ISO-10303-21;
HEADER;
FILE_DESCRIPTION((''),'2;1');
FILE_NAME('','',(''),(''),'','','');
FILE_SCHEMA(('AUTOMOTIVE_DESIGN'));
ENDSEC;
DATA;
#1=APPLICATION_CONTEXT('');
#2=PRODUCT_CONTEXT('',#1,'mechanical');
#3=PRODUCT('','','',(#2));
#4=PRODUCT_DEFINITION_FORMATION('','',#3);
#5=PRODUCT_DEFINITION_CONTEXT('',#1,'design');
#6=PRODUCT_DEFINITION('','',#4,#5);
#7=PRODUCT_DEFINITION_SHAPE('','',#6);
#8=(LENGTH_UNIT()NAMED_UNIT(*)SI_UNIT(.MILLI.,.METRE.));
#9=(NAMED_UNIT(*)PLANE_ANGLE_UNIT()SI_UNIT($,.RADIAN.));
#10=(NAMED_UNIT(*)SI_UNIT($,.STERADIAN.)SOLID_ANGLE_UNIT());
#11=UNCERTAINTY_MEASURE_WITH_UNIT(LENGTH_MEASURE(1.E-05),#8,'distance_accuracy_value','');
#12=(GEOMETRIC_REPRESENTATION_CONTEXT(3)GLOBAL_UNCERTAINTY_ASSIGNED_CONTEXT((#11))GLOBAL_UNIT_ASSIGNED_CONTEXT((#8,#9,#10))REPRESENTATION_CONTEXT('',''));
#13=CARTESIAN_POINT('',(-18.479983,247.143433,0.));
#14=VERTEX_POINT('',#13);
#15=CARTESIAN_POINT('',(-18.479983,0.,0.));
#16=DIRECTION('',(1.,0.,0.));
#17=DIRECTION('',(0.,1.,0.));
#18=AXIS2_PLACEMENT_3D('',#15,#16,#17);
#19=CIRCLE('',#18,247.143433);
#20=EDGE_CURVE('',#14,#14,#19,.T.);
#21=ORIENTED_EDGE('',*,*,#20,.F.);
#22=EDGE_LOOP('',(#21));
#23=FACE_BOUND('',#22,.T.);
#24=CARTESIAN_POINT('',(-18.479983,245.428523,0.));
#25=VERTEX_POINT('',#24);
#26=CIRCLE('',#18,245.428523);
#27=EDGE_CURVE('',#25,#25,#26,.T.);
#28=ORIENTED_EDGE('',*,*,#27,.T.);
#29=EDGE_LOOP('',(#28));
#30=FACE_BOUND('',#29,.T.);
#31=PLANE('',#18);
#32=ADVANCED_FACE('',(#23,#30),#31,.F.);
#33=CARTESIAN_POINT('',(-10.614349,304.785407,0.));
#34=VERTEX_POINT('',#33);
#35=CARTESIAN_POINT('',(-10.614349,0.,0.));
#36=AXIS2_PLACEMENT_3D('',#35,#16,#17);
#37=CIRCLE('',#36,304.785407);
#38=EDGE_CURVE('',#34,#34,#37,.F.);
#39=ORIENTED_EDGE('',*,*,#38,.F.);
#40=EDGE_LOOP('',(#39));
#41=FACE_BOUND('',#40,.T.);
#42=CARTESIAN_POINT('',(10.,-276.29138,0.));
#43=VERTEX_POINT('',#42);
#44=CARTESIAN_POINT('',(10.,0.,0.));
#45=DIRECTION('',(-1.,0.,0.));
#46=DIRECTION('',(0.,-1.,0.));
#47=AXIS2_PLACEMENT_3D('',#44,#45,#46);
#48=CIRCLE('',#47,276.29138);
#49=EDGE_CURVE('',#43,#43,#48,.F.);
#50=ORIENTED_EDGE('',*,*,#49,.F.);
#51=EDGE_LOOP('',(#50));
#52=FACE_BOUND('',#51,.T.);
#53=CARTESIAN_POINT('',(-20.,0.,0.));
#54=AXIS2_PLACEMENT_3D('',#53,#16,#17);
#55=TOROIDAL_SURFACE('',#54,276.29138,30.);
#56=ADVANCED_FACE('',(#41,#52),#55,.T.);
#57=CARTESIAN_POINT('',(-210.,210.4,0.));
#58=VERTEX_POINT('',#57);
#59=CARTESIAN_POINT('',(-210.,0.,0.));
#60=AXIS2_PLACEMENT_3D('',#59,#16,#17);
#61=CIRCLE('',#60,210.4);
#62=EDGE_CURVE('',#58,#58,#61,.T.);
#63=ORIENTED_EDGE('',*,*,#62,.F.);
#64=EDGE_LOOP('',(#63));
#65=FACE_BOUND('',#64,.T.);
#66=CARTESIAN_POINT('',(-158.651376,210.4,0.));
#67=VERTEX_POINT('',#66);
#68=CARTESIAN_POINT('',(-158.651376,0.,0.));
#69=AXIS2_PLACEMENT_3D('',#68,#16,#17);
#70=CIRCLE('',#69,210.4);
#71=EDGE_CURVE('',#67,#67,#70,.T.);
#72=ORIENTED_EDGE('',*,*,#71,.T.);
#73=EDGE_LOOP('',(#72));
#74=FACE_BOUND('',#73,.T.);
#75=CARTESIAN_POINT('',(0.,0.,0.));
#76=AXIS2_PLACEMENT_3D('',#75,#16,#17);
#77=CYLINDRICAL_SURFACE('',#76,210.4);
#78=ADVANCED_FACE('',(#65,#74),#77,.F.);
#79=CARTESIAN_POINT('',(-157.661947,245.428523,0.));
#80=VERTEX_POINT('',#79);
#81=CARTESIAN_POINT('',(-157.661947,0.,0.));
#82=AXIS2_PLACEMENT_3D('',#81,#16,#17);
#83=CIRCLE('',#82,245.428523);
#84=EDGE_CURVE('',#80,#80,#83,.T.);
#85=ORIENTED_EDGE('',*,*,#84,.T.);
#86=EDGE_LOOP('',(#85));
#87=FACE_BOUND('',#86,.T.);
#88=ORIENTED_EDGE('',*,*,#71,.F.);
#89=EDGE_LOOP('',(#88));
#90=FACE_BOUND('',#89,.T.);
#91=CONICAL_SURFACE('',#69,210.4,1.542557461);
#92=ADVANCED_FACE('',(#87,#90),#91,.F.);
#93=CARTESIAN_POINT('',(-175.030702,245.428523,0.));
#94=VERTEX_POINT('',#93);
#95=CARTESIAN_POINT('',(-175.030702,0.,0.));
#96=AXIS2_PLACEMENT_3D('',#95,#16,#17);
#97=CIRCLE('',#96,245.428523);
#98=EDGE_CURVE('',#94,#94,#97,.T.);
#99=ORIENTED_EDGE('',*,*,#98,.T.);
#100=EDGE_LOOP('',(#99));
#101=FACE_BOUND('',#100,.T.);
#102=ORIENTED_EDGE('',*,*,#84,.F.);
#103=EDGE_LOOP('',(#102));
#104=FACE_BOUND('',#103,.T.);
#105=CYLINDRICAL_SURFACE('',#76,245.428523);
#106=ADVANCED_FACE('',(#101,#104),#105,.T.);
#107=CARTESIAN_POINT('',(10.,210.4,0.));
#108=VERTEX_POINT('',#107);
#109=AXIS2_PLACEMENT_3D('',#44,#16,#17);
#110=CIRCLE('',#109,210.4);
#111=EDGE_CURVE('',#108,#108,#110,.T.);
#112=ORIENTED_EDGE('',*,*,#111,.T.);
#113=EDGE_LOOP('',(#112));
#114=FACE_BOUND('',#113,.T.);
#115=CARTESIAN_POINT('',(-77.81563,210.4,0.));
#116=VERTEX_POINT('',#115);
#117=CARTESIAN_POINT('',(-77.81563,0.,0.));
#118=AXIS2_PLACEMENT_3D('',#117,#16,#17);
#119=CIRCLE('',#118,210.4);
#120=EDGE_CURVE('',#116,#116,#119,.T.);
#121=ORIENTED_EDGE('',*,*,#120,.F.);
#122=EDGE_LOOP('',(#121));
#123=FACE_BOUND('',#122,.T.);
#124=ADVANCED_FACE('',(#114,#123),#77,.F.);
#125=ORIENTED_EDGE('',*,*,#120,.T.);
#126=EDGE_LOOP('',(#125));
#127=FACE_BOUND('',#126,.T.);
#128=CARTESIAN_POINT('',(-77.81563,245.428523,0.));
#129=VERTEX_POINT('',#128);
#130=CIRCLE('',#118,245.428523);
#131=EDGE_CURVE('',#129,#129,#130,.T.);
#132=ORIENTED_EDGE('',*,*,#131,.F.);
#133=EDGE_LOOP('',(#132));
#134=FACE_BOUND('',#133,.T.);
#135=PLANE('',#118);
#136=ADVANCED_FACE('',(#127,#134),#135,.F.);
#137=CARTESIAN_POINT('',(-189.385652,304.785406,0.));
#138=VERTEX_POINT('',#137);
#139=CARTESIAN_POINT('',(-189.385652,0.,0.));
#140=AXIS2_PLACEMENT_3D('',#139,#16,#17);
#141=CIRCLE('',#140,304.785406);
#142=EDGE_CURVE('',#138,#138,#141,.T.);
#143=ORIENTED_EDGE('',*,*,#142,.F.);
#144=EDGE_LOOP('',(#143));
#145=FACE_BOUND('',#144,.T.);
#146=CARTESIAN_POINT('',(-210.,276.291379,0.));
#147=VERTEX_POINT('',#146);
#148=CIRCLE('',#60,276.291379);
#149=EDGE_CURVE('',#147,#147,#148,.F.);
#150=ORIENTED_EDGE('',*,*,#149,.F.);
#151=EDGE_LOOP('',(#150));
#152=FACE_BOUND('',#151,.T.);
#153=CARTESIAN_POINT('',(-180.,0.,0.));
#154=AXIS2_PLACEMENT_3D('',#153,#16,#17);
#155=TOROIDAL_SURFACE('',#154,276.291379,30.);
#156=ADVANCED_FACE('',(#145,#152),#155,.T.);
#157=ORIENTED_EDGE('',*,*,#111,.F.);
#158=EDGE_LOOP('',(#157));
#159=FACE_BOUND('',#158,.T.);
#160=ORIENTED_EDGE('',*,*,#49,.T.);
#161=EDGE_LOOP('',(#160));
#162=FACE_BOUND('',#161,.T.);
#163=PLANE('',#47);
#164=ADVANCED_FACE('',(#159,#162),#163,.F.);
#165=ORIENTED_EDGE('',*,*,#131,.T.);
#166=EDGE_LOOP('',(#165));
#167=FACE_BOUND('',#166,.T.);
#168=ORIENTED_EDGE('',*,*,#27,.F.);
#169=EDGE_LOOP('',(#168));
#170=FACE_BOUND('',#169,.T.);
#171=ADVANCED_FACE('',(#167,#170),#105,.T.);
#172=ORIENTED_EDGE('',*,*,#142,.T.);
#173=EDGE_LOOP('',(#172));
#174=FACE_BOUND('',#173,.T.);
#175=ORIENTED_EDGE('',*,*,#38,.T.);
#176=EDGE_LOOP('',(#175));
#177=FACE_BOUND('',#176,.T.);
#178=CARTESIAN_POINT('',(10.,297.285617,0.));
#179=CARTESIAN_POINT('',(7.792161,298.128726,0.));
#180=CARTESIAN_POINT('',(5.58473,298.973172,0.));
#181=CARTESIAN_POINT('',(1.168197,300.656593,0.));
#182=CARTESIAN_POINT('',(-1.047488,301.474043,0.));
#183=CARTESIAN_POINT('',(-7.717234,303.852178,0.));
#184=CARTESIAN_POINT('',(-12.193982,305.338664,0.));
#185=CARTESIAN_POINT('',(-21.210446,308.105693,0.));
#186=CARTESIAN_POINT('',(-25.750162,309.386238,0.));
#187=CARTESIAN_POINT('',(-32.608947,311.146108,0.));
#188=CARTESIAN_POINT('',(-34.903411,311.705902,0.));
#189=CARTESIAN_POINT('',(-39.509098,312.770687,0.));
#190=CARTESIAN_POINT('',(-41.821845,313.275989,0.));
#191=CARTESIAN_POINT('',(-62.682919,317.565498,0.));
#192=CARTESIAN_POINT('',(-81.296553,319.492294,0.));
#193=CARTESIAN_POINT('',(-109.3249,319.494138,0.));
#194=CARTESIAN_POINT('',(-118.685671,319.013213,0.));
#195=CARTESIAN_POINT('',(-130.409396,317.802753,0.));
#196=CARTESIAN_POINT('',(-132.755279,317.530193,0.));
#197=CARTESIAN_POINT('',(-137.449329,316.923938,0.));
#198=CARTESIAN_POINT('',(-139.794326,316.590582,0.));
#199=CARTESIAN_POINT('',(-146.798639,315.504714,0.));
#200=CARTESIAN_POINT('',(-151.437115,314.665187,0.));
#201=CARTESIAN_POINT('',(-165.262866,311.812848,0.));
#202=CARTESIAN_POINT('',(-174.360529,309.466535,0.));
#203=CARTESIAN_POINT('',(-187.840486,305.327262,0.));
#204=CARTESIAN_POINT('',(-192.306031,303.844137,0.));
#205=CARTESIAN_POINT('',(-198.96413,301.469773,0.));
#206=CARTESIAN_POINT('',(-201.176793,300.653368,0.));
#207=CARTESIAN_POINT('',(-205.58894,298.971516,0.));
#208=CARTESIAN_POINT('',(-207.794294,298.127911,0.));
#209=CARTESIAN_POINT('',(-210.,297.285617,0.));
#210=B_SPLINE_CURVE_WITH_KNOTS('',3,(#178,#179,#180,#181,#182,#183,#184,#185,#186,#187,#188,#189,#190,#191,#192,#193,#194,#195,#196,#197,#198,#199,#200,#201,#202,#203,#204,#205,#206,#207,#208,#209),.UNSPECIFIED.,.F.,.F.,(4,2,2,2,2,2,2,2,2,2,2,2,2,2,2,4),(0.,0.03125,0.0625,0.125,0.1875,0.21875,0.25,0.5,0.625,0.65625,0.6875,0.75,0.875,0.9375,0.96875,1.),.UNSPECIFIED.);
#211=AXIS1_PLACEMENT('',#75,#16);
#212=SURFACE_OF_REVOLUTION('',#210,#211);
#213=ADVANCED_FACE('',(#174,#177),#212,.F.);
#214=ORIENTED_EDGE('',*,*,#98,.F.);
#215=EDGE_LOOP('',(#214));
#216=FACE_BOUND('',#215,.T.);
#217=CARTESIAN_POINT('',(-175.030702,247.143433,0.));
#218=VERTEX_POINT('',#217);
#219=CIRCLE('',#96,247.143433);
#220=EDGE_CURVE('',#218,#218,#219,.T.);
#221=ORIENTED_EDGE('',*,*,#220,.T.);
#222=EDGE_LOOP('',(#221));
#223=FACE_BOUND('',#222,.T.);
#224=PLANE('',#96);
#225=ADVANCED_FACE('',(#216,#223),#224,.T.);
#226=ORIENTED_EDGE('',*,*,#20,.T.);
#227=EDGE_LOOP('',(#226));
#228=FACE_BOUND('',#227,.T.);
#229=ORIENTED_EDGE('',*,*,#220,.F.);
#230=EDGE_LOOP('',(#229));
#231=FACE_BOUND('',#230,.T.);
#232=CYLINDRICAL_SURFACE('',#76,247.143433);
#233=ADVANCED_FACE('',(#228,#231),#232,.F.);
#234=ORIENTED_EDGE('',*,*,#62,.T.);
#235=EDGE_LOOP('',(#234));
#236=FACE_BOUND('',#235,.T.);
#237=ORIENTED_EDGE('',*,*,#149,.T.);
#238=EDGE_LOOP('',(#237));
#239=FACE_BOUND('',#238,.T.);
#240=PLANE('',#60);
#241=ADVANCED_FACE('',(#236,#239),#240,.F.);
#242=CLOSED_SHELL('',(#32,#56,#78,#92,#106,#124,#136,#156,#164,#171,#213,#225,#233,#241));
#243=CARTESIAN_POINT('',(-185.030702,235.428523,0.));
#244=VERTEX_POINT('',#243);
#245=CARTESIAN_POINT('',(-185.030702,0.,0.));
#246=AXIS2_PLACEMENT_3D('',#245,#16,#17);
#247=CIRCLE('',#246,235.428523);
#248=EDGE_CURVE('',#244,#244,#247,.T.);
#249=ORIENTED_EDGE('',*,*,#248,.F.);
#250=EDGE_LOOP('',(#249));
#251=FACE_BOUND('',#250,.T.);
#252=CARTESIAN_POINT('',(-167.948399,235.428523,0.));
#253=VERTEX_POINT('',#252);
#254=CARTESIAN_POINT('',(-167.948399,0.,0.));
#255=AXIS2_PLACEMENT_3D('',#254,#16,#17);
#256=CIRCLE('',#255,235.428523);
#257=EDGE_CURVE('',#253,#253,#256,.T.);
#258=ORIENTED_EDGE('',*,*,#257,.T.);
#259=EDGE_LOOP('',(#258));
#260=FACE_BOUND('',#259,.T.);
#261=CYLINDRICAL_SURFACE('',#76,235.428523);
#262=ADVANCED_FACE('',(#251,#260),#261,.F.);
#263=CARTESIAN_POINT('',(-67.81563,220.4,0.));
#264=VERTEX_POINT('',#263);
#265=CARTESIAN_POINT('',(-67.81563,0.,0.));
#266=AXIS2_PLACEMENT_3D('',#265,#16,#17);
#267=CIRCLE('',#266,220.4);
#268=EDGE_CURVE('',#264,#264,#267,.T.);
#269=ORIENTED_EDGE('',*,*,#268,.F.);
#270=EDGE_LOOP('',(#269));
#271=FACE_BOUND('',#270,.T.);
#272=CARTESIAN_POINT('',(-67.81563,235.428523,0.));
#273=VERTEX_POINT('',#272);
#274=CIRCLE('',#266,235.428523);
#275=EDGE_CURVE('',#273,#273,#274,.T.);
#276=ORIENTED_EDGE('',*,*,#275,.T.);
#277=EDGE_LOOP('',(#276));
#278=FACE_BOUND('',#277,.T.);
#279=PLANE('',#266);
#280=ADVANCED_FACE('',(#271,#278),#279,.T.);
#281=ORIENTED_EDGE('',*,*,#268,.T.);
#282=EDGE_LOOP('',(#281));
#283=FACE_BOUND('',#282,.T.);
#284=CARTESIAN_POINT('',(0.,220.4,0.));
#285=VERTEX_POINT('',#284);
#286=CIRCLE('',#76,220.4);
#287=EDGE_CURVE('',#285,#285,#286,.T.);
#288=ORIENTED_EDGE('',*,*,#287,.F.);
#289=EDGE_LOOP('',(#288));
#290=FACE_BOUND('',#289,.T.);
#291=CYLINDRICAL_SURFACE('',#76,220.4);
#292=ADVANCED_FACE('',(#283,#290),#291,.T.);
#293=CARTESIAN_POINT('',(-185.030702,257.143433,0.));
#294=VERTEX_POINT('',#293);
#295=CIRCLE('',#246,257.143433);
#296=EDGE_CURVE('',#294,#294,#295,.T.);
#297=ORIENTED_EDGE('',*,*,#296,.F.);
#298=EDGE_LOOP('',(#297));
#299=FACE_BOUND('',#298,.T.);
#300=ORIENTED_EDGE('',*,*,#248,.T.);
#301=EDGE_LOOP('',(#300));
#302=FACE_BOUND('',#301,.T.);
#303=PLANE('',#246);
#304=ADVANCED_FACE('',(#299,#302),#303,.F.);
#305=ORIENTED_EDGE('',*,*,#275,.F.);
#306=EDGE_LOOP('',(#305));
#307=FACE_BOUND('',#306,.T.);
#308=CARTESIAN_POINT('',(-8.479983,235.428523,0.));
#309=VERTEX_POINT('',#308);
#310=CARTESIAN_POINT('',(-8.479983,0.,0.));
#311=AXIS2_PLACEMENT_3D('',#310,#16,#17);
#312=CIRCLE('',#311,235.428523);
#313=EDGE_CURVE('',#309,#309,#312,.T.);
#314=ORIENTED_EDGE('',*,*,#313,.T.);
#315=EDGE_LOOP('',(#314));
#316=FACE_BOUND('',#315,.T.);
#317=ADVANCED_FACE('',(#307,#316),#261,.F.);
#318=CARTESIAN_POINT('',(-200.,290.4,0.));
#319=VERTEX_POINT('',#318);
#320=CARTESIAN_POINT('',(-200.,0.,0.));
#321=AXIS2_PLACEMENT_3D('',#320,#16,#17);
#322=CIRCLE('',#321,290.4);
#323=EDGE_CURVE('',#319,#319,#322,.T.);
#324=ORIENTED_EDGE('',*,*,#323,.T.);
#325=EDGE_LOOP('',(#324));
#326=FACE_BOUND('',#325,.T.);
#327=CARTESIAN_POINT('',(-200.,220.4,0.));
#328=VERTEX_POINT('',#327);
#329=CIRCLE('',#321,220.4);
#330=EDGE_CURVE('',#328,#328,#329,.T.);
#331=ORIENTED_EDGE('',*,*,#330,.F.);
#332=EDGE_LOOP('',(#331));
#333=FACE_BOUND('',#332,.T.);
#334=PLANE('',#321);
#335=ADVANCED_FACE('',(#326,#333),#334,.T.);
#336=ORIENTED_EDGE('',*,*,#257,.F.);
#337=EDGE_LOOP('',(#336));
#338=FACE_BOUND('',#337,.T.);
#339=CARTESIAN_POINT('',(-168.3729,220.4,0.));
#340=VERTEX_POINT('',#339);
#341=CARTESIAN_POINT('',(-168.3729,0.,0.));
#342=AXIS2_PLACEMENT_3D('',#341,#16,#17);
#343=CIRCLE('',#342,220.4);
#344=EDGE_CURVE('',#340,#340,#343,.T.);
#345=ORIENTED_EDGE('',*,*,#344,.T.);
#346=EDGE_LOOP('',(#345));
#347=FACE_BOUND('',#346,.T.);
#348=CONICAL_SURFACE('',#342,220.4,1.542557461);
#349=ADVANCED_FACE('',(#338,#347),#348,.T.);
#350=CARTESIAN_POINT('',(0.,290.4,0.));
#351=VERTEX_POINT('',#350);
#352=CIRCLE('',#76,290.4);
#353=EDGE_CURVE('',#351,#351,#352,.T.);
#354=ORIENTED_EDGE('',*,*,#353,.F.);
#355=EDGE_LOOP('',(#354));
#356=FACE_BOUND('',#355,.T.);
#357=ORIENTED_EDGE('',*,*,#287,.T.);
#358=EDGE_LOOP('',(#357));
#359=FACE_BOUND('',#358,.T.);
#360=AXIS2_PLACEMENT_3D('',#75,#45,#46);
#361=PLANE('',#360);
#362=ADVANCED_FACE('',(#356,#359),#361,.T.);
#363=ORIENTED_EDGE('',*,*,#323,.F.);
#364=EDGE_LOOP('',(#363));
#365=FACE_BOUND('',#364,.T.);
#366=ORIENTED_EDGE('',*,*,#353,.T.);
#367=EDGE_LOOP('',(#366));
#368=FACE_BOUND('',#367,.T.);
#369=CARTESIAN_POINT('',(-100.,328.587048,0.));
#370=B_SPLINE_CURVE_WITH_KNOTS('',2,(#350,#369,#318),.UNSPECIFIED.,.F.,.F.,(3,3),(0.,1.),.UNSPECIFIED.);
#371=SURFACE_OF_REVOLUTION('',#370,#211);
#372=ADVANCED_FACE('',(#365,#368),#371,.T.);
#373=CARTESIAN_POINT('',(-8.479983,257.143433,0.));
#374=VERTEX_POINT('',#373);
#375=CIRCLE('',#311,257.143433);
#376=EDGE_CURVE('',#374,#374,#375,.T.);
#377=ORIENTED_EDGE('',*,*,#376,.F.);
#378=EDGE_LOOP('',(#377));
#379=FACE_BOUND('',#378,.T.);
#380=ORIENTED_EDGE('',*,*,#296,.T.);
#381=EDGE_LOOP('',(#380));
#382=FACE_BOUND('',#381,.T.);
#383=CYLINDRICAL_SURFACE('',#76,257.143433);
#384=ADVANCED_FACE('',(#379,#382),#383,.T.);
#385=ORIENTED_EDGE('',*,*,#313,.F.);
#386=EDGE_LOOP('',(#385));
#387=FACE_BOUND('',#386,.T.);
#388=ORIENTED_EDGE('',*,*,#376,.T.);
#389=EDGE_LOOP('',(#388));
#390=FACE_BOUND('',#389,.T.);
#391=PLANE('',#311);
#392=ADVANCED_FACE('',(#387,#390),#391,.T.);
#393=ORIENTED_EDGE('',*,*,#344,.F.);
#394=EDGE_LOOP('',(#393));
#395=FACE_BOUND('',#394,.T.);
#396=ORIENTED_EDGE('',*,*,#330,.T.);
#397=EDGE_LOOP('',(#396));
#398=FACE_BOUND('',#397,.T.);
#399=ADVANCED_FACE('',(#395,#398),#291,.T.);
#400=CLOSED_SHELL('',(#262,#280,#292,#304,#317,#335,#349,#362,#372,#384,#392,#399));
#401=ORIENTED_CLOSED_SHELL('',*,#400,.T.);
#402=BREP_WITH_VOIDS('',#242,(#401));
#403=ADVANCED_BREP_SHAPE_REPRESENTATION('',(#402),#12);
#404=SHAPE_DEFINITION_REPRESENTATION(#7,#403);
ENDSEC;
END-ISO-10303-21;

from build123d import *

# Parameters (mm, degrees)
REVOLVE_THIN1_OUTLINE_W   = 10
REVOLVE_THIN1_OUTLINE_H   = 10
REVOLVE_THIN1_OUTLINE_W_2 = 15.028522582
REVOLVE_THIN1_OUTLINE_W_3 = 1.714910115
REVOLVE_THIN1_OUTLINE_W_4 = 33.256567303
REVOLVE_THIN1_OUTLINE_W_5 = 6.885617046
FILLET1_R                 = 30


# Read off the part's stored shape, not the designer's step: Revolve-Thin1
with BuildPart() as part:
    # Revolve-Thin1 outline → Revolve-Thin1 (revolve)
    with BuildSketch(Plane.YX):
        with Locations((215.4, 5)):
            Rectangle(REVOLVE_THIN1_OUTLINE_W, REVOLVE_THIN1_OUTLINE_H)
        with Locations((227.914261291, 5)):
            Rectangle(REVOLVE_THIN1_OUTLINE_W_2, REVOLVE_THIN1_OUTLINE_H)
        Polygon((220.4, 0), (210.4, 0), (210.4, -77.81562954), (220.4, -77.81562954), (220.4, -67.81562954), align=None)
        with Locations((240.428522582, 5)):
            Rectangle(REVOLVE_THIN1_OUTLINE_W, REVOLVE_THIN1_OUTLINE_H)
        with Locations((246.28597764, 5)):
            Rectangle(REVOLVE_THIN1_OUTLINE_W_3, REVOLVE_THIN1_OUTLINE_H)
        with Locations((227.914261291, -72.81562954)):
            Rectangle(REVOLVE_THIN1_OUTLINE_W_2, REVOLVE_THIN1_OUTLINE_H)
        Polygon((220.4, -158.368911943), (210.4, -158.651375691), (210.4, -200), (220.4, -200), (220.4, -168.372900436), align=None)
        with Locations((252.143432697, 5)):
            Rectangle(REVOLVE_THIN1_OUTLINE_W, REVOLVE_THIN1_OUTLINE_H)
        Polygon((245.428522582, -8.479983428), (235.428522582, -8.479983428), (235.428522582, -67.81562954), (235.428522582, -77.81562954), (245.428522582, -77.81562954), (245.428522582, -18.479983428), align=None)
        Polygon((235.428522582, -157.944410663), (220.4, -158.368911943), (220.4, -168.372900436), (235.428522582, -167.948399156), align=None)
        with Locations((215.4, -205)):
            Rectangle(REVOLVE_THIN1_OUTLINE_W, REVOLVE_THIN1_OUTLINE_H)
        with Locations((273.771716349, 5)):
            Rectangle(REVOLVE_THIN1_OUTLINE_W_4, REVOLVE_THIN1_OUTLINE_H)
        with Locations((246.28597764, -13.479983428)):
            Rectangle(REVOLVE_THIN1_OUTLINE_W_3, REVOLVE_THIN1_OUTLINE_H)
        Polygon((245.428522582, -157.661946915), (235.428522582, -157.944410663), (235.428522582, -167.948399156), (235.428522582, -185.030701799), (245.428522582, -185.030701799), (245.428522582, -175.030701799), align=None)
        with Locations((227.914261291, -205)):
            Rectangle(REVOLVE_THIN1_OUTLINE_W_2, REVOLVE_THIN1_OUTLINE_H)
        with Locations((293.842808523, 5)):
            Rectangle(REVOLVE_THIN1_OUTLINE_W_5, REVOLVE_THIN1_OUTLINE_H)
        Polygon((257.143432697, -8.479983428), (247.143432697, -8.479983428), (247.143432697, -18.479983428), (247.143432697, -175.030701799), (247.143432697, -185.030701799), (257.143432697, -185.030701799), align=None)
        with Locations((240.428522582, -205)):
            Rectangle(REVOLVE_THIN1_OUTLINE_W, REVOLVE_THIN1_OUTLINE_H)
        with BuildLine():
            add(Edge.make_bspline(
                [(297.285617046, 10), (298.128725715, 7.792160668), (298.973172441, 5.584730456), (300.24314277, 2.252902336), (300.665122715, 1.127420929), (301.080759322, 0)],
                knots=[0, 0, 0, 0, 0.03125, 0.03125, 0.047149929, 0.047149929, 0.047149929, 0.047149929], degree=3))
            Line((297.285617046, 10), (297.285617046, 0))
            Line((297.285617046, 0), (301.080759322, 0))
        make_face()
        with BuildLine():
            Line((297.285617046, 0), (290.4, 0))
            add(Edge.make_bspline(
                [(290.4, 0), (294.226174379, -10.019560473), (297.285617046, -20.039120946)],
                knots=[0, 0, 0, 0.100195605, 0.100195605, 0.100195605], degree=2))
            Line((297.285617046, -20.039120946), (297.285617046, 0))
        make_face()
        with Locations((246.28597764, -180.030701799)):
            Rectangle(REVOLVE_THIN1_OUTLINE_W_3, REVOLVE_THIN1_OUTLINE_H)
        with Locations((246.28597764, -205)):
            Rectangle(REVOLVE_THIN1_OUTLINE_W_3, REVOLVE_THIN1_OUTLINE_H)
        with BuildLine():
            add(Edge.make_bspline(
                [(301.080759322, 0), (301.482022229, -1.088432041), (301.877372946, -2.178671776), (303.852177937, -7.717233747), (305.338663789, -12.193981744), (308.105692918, -21.210446155), (309.386238407, -25.750161893), (311.146108373, -32.608946585), (311.705902157, -34.903411472), (312.770687134, -39.509097532), (313.275989251, -41.821845227), (317.565497999, -62.682918974), (319.49229443, -81.296552716), (319.493523861, -99.988077296), (319.493524058, -99.994036727), (319.493524058, -99.999996165)],
                knots=[0.047149929, 0.047149929, 0.047149929, 0.047149929, 0.0625, 0.0625, 0.125, 0.125, 0.1875, 0.1875, 0.21875, 0.21875, 0.25, 0.25, 0.5, 0.5, 0.500079733, 0.500079733, 0.500079733, 0.500079733], degree=3))
            Line((301.080759322, 0), (297.285617046, 0))
            Line((297.285617046, 0), (297.285617046, -20.039120946))
            add(Edge.make_bspline(
                [(297.285617046, -20.039120946), (321.701431069, -100), (297.285617046, -179.960879054)],
                knots=[0.100195605, 0.100195605, 0.100195605, 0.899804395, 0.899804395, 0.899804395], degree=2))
            Line((297.285617046, -179.960879054), (297.285617046, -200))
            Line((297.285617046, -200), (301.080759262, -200))
            add(Edge.make_bspline(
                [(319.493524058, -99.999996165), (319.493524261, -109.336842253), (319.012595, -118.691653921), (317.802753291, -130.409396195), (317.530192964, -132.755279331), (316.92393783, -137.449329338), (316.590581813, -139.794326035), (315.504714447, -146.798638914), (314.665186614, -151.437115247), (311.812847999, -165.262865698), (309.466535158, -174.360529261), (305.327261679, -187.840485904), (303.844137072, -192.30603058), (301.87370296, -197.831445048), (301.48019677, -198.916519384), (301.080759262, -200)],
                knots=[0.500079733, 0.500079733, 0.500079733, 0.500079733, 0.625, 0.625, 0.65625, 0.65625, 0.6875, 0.6875, 0.75, 0.75, 0.875, 0.875, 0.9375, 0.9375, 0.952801123, 0.952801123, 0.952801123, 0.952801123], degree=3))
        make_face()
        with Locations((273.771716349, -205)):
            Rectangle(REVOLVE_THIN1_OUTLINE_W_4, REVOLVE_THIN1_OUTLINE_H)
        with Locations((293.842808523, -205)):
            Rectangle(REVOLVE_THIN1_OUTLINE_W_5, REVOLVE_THIN1_OUTLINE_H)
        with BuildLine():
            add(Edge.make_bspline(
                [(297.285617046, -179.960879054), (294.226174379, -189.980439527), (290.4, -200)],
                knots=[0.899804395, 0.899804395, 0.899804395, 1, 1, 1], degree=2))
            Line((290.4, -200), (297.285617046, -200))
            Line((297.285617046, -200), (297.285617046, -179.960879054))
        make_face()
        with Locations((252.143432697, -205)):
            Rectangle(REVOLVE_THIN1_OUTLINE_W, REVOLVE_THIN1_OUTLINE_H)
        with BuildLine():
            Line((301.080759262, -200), (297.285617046, -200))
            Line((297.285617046, -200), (297.285617046, -210))
            add(Edge.make_bspline(
                [(301.080759262, -200), (300.664412042, -201.129348479), (300.241620682, -202.256965445), (298.971515607, -205.588939805), (298.127911115, -207.79429385), (297.285617046, -210)],
                knots=[0.952801123, 0.952801123, 0.952801123, 0.952801123, 0.96875, 0.96875, 1, 1, 1, 1], degree=3))
        make_face()
    revolve(axis=Axis((0, 0, 0), (1, 0, 0)))

    # Fillet1
    fillet1_edges = [part.edges().sort_by_distance(p)[0] for p in [
        (-210, -297.285617046, 0),
        (10, -297.285617046, 0),
    ]]
    fillet(fillet1_edges, radius=FILLET1_R)


solid = part.part
